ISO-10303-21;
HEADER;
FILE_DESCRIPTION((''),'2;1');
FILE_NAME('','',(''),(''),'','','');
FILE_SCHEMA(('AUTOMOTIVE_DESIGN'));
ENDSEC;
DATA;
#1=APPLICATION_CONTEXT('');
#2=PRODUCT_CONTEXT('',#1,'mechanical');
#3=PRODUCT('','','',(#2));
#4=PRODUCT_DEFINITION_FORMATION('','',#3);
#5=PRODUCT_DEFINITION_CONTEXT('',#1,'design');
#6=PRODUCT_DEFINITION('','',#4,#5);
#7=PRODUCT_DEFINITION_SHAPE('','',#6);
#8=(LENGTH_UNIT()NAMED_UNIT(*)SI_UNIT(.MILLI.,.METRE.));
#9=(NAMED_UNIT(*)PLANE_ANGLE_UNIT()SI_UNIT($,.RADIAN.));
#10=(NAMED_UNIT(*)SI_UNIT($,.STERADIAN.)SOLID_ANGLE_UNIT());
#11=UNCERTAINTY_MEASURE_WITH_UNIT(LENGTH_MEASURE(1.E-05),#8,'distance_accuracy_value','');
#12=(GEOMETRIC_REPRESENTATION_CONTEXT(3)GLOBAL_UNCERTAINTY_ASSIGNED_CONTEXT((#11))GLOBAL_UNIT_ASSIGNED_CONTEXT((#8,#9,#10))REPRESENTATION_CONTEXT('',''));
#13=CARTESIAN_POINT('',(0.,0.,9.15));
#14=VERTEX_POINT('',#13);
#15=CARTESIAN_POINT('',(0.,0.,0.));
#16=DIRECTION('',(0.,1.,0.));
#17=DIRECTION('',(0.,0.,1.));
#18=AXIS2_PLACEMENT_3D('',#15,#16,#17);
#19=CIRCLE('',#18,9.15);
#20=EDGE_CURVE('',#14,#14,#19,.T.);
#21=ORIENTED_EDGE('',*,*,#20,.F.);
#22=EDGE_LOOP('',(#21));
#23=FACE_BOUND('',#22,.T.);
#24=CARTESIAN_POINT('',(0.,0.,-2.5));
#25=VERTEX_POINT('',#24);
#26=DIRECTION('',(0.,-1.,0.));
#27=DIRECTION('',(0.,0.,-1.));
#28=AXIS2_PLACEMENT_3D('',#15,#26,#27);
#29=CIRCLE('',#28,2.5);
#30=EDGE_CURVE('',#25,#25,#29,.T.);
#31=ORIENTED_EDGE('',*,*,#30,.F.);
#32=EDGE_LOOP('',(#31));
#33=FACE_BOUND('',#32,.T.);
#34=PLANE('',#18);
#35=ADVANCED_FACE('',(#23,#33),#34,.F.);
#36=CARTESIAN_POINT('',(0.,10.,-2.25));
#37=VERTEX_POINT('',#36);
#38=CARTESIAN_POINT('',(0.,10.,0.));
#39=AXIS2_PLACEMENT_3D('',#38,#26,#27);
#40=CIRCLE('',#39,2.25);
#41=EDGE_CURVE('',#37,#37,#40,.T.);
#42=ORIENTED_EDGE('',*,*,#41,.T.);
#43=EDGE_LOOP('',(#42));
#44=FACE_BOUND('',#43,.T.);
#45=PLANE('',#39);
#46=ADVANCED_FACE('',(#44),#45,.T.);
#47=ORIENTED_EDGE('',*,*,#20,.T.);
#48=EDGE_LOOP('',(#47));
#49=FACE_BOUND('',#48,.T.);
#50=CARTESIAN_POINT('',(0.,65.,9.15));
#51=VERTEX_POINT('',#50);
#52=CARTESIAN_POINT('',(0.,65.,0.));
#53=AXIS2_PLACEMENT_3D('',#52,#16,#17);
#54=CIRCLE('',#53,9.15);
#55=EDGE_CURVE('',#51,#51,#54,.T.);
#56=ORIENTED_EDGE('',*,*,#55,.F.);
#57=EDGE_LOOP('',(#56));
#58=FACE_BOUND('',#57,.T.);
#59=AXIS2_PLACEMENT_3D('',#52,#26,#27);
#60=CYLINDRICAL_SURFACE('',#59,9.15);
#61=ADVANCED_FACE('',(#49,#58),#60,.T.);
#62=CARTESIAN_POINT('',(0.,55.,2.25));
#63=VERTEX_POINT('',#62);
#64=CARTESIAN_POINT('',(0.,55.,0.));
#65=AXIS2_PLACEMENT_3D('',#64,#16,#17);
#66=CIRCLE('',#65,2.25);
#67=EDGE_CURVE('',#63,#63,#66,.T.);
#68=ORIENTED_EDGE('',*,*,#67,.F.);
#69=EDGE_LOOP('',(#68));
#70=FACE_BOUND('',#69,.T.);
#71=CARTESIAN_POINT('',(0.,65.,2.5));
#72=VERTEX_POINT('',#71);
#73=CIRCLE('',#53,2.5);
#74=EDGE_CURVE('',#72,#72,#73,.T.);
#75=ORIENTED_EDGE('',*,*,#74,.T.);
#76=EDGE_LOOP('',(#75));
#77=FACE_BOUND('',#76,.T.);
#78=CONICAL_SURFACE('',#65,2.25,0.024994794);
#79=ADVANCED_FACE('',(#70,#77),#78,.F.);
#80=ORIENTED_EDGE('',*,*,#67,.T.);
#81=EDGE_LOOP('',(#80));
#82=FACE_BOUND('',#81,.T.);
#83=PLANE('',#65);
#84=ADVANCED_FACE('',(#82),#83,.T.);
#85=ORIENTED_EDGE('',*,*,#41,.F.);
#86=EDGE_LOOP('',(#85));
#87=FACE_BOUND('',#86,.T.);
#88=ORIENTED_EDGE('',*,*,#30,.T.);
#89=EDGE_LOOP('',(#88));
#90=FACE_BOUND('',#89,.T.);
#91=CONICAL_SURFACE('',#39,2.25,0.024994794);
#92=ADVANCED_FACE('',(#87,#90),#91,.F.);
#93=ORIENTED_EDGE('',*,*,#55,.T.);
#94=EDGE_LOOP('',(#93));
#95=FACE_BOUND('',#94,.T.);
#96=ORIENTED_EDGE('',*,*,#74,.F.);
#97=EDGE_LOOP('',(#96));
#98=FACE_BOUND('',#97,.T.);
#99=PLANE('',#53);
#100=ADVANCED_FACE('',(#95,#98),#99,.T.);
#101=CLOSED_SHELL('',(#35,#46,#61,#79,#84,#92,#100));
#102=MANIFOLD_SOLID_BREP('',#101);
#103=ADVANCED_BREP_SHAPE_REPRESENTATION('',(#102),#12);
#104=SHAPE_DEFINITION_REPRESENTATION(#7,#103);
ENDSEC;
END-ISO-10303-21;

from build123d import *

# Parameters (mm, degrees)
SKETCH1_R           = 9.15
BOSS_EXTRUDE1_DEPTH = 65
SKETCH2_R           = 2.5
CUT_EXTRUDE1_DEPTH  = 10
CHAMFER1_SIZE2      = 0.25
CHAMFER1_SIZE       = 10
CUT_EXTRUDE2_START  = -10
SKETCH3_R           = 2.5
CUT_EXTRUDE2_DEPTH  = 10
CHAMFER2_SIZE2      = 0.25
CHAMFER2_SIZE       = 10


with BuildPart() as part:
    # Sketch1 → Boss-Extrude1 (new body)
    with BuildSketch(Plane(origin=(0, 0, 0), x_dir=(1, 0, 0), z_dir=(0, 1, 0))):
        with Locations(Location((0, 0, 0), (0, 0, 270))):
            Circle(SKETCH1_R)
    extrude(amount=BOSS_EXTRUDE1_DEPTH)

    # Sketch2 → Cut-Extrude1 (cut)
    with BuildSketch(Plane(origin=(0, 65, 0), x_dir=(1, 0, 0), z_dir=(0, 1, 0))):
        with Locations(Location((0, 0, 0), (0, 0, 270))):
            Circle(SKETCH2_R)
    extrude(amount=-CUT_EXTRUDE1_DEPTH, mode=Mode.SUBTRACT)

    # Chamfer1
    chamfer1_edges = [part.edges().sort_by_distance(p)[0] for p in [
        (0, 55, -2.5),
    ]]
    chamfer1_side = [part.faces().sort_by_distance(p)[0] for p in [
        (0, 55.005, -2.5),
    ]]
    chamfer(chamfer1_edges, length=CHAMFER1_SIZE - 0.0001, length2=CHAMFER1_SIZE2 - 0.0001, reference=chamfer1_side[0])  # a hair under: the kernel refuses the full size

    # Sketch3 → Cut-Extrude2 (cut)
    with BuildSketch(Plane.XZ.offset(CUT_EXTRUDE2_START)):
        with Locations(Location((0, 0, 0), (0, 0, 270))):
            Circle(SKETCH3_R)
    extrude(amount=CUT_EXTRUDE2_DEPTH, mode=Mode.SUBTRACT)

    # Chamfer2
    chamfer2_edges = [part.edges().sort_by_distance(p)[0] for p in [
        (0, 10, 2.5),
    ]]
    chamfer2_side = [part.faces().sort_by_distance(p)[0] for p in [
        (0, 9.995, 2.5),
    ]]
    chamfer(chamfer2_edges, length=CHAMFER2_SIZE - 0.0001, length2=CHAMFER2_SIZE2 - 0.0001, reference=chamfer2_side[0])  # a hair under: the kernel refuses the full size


solid = part.part
